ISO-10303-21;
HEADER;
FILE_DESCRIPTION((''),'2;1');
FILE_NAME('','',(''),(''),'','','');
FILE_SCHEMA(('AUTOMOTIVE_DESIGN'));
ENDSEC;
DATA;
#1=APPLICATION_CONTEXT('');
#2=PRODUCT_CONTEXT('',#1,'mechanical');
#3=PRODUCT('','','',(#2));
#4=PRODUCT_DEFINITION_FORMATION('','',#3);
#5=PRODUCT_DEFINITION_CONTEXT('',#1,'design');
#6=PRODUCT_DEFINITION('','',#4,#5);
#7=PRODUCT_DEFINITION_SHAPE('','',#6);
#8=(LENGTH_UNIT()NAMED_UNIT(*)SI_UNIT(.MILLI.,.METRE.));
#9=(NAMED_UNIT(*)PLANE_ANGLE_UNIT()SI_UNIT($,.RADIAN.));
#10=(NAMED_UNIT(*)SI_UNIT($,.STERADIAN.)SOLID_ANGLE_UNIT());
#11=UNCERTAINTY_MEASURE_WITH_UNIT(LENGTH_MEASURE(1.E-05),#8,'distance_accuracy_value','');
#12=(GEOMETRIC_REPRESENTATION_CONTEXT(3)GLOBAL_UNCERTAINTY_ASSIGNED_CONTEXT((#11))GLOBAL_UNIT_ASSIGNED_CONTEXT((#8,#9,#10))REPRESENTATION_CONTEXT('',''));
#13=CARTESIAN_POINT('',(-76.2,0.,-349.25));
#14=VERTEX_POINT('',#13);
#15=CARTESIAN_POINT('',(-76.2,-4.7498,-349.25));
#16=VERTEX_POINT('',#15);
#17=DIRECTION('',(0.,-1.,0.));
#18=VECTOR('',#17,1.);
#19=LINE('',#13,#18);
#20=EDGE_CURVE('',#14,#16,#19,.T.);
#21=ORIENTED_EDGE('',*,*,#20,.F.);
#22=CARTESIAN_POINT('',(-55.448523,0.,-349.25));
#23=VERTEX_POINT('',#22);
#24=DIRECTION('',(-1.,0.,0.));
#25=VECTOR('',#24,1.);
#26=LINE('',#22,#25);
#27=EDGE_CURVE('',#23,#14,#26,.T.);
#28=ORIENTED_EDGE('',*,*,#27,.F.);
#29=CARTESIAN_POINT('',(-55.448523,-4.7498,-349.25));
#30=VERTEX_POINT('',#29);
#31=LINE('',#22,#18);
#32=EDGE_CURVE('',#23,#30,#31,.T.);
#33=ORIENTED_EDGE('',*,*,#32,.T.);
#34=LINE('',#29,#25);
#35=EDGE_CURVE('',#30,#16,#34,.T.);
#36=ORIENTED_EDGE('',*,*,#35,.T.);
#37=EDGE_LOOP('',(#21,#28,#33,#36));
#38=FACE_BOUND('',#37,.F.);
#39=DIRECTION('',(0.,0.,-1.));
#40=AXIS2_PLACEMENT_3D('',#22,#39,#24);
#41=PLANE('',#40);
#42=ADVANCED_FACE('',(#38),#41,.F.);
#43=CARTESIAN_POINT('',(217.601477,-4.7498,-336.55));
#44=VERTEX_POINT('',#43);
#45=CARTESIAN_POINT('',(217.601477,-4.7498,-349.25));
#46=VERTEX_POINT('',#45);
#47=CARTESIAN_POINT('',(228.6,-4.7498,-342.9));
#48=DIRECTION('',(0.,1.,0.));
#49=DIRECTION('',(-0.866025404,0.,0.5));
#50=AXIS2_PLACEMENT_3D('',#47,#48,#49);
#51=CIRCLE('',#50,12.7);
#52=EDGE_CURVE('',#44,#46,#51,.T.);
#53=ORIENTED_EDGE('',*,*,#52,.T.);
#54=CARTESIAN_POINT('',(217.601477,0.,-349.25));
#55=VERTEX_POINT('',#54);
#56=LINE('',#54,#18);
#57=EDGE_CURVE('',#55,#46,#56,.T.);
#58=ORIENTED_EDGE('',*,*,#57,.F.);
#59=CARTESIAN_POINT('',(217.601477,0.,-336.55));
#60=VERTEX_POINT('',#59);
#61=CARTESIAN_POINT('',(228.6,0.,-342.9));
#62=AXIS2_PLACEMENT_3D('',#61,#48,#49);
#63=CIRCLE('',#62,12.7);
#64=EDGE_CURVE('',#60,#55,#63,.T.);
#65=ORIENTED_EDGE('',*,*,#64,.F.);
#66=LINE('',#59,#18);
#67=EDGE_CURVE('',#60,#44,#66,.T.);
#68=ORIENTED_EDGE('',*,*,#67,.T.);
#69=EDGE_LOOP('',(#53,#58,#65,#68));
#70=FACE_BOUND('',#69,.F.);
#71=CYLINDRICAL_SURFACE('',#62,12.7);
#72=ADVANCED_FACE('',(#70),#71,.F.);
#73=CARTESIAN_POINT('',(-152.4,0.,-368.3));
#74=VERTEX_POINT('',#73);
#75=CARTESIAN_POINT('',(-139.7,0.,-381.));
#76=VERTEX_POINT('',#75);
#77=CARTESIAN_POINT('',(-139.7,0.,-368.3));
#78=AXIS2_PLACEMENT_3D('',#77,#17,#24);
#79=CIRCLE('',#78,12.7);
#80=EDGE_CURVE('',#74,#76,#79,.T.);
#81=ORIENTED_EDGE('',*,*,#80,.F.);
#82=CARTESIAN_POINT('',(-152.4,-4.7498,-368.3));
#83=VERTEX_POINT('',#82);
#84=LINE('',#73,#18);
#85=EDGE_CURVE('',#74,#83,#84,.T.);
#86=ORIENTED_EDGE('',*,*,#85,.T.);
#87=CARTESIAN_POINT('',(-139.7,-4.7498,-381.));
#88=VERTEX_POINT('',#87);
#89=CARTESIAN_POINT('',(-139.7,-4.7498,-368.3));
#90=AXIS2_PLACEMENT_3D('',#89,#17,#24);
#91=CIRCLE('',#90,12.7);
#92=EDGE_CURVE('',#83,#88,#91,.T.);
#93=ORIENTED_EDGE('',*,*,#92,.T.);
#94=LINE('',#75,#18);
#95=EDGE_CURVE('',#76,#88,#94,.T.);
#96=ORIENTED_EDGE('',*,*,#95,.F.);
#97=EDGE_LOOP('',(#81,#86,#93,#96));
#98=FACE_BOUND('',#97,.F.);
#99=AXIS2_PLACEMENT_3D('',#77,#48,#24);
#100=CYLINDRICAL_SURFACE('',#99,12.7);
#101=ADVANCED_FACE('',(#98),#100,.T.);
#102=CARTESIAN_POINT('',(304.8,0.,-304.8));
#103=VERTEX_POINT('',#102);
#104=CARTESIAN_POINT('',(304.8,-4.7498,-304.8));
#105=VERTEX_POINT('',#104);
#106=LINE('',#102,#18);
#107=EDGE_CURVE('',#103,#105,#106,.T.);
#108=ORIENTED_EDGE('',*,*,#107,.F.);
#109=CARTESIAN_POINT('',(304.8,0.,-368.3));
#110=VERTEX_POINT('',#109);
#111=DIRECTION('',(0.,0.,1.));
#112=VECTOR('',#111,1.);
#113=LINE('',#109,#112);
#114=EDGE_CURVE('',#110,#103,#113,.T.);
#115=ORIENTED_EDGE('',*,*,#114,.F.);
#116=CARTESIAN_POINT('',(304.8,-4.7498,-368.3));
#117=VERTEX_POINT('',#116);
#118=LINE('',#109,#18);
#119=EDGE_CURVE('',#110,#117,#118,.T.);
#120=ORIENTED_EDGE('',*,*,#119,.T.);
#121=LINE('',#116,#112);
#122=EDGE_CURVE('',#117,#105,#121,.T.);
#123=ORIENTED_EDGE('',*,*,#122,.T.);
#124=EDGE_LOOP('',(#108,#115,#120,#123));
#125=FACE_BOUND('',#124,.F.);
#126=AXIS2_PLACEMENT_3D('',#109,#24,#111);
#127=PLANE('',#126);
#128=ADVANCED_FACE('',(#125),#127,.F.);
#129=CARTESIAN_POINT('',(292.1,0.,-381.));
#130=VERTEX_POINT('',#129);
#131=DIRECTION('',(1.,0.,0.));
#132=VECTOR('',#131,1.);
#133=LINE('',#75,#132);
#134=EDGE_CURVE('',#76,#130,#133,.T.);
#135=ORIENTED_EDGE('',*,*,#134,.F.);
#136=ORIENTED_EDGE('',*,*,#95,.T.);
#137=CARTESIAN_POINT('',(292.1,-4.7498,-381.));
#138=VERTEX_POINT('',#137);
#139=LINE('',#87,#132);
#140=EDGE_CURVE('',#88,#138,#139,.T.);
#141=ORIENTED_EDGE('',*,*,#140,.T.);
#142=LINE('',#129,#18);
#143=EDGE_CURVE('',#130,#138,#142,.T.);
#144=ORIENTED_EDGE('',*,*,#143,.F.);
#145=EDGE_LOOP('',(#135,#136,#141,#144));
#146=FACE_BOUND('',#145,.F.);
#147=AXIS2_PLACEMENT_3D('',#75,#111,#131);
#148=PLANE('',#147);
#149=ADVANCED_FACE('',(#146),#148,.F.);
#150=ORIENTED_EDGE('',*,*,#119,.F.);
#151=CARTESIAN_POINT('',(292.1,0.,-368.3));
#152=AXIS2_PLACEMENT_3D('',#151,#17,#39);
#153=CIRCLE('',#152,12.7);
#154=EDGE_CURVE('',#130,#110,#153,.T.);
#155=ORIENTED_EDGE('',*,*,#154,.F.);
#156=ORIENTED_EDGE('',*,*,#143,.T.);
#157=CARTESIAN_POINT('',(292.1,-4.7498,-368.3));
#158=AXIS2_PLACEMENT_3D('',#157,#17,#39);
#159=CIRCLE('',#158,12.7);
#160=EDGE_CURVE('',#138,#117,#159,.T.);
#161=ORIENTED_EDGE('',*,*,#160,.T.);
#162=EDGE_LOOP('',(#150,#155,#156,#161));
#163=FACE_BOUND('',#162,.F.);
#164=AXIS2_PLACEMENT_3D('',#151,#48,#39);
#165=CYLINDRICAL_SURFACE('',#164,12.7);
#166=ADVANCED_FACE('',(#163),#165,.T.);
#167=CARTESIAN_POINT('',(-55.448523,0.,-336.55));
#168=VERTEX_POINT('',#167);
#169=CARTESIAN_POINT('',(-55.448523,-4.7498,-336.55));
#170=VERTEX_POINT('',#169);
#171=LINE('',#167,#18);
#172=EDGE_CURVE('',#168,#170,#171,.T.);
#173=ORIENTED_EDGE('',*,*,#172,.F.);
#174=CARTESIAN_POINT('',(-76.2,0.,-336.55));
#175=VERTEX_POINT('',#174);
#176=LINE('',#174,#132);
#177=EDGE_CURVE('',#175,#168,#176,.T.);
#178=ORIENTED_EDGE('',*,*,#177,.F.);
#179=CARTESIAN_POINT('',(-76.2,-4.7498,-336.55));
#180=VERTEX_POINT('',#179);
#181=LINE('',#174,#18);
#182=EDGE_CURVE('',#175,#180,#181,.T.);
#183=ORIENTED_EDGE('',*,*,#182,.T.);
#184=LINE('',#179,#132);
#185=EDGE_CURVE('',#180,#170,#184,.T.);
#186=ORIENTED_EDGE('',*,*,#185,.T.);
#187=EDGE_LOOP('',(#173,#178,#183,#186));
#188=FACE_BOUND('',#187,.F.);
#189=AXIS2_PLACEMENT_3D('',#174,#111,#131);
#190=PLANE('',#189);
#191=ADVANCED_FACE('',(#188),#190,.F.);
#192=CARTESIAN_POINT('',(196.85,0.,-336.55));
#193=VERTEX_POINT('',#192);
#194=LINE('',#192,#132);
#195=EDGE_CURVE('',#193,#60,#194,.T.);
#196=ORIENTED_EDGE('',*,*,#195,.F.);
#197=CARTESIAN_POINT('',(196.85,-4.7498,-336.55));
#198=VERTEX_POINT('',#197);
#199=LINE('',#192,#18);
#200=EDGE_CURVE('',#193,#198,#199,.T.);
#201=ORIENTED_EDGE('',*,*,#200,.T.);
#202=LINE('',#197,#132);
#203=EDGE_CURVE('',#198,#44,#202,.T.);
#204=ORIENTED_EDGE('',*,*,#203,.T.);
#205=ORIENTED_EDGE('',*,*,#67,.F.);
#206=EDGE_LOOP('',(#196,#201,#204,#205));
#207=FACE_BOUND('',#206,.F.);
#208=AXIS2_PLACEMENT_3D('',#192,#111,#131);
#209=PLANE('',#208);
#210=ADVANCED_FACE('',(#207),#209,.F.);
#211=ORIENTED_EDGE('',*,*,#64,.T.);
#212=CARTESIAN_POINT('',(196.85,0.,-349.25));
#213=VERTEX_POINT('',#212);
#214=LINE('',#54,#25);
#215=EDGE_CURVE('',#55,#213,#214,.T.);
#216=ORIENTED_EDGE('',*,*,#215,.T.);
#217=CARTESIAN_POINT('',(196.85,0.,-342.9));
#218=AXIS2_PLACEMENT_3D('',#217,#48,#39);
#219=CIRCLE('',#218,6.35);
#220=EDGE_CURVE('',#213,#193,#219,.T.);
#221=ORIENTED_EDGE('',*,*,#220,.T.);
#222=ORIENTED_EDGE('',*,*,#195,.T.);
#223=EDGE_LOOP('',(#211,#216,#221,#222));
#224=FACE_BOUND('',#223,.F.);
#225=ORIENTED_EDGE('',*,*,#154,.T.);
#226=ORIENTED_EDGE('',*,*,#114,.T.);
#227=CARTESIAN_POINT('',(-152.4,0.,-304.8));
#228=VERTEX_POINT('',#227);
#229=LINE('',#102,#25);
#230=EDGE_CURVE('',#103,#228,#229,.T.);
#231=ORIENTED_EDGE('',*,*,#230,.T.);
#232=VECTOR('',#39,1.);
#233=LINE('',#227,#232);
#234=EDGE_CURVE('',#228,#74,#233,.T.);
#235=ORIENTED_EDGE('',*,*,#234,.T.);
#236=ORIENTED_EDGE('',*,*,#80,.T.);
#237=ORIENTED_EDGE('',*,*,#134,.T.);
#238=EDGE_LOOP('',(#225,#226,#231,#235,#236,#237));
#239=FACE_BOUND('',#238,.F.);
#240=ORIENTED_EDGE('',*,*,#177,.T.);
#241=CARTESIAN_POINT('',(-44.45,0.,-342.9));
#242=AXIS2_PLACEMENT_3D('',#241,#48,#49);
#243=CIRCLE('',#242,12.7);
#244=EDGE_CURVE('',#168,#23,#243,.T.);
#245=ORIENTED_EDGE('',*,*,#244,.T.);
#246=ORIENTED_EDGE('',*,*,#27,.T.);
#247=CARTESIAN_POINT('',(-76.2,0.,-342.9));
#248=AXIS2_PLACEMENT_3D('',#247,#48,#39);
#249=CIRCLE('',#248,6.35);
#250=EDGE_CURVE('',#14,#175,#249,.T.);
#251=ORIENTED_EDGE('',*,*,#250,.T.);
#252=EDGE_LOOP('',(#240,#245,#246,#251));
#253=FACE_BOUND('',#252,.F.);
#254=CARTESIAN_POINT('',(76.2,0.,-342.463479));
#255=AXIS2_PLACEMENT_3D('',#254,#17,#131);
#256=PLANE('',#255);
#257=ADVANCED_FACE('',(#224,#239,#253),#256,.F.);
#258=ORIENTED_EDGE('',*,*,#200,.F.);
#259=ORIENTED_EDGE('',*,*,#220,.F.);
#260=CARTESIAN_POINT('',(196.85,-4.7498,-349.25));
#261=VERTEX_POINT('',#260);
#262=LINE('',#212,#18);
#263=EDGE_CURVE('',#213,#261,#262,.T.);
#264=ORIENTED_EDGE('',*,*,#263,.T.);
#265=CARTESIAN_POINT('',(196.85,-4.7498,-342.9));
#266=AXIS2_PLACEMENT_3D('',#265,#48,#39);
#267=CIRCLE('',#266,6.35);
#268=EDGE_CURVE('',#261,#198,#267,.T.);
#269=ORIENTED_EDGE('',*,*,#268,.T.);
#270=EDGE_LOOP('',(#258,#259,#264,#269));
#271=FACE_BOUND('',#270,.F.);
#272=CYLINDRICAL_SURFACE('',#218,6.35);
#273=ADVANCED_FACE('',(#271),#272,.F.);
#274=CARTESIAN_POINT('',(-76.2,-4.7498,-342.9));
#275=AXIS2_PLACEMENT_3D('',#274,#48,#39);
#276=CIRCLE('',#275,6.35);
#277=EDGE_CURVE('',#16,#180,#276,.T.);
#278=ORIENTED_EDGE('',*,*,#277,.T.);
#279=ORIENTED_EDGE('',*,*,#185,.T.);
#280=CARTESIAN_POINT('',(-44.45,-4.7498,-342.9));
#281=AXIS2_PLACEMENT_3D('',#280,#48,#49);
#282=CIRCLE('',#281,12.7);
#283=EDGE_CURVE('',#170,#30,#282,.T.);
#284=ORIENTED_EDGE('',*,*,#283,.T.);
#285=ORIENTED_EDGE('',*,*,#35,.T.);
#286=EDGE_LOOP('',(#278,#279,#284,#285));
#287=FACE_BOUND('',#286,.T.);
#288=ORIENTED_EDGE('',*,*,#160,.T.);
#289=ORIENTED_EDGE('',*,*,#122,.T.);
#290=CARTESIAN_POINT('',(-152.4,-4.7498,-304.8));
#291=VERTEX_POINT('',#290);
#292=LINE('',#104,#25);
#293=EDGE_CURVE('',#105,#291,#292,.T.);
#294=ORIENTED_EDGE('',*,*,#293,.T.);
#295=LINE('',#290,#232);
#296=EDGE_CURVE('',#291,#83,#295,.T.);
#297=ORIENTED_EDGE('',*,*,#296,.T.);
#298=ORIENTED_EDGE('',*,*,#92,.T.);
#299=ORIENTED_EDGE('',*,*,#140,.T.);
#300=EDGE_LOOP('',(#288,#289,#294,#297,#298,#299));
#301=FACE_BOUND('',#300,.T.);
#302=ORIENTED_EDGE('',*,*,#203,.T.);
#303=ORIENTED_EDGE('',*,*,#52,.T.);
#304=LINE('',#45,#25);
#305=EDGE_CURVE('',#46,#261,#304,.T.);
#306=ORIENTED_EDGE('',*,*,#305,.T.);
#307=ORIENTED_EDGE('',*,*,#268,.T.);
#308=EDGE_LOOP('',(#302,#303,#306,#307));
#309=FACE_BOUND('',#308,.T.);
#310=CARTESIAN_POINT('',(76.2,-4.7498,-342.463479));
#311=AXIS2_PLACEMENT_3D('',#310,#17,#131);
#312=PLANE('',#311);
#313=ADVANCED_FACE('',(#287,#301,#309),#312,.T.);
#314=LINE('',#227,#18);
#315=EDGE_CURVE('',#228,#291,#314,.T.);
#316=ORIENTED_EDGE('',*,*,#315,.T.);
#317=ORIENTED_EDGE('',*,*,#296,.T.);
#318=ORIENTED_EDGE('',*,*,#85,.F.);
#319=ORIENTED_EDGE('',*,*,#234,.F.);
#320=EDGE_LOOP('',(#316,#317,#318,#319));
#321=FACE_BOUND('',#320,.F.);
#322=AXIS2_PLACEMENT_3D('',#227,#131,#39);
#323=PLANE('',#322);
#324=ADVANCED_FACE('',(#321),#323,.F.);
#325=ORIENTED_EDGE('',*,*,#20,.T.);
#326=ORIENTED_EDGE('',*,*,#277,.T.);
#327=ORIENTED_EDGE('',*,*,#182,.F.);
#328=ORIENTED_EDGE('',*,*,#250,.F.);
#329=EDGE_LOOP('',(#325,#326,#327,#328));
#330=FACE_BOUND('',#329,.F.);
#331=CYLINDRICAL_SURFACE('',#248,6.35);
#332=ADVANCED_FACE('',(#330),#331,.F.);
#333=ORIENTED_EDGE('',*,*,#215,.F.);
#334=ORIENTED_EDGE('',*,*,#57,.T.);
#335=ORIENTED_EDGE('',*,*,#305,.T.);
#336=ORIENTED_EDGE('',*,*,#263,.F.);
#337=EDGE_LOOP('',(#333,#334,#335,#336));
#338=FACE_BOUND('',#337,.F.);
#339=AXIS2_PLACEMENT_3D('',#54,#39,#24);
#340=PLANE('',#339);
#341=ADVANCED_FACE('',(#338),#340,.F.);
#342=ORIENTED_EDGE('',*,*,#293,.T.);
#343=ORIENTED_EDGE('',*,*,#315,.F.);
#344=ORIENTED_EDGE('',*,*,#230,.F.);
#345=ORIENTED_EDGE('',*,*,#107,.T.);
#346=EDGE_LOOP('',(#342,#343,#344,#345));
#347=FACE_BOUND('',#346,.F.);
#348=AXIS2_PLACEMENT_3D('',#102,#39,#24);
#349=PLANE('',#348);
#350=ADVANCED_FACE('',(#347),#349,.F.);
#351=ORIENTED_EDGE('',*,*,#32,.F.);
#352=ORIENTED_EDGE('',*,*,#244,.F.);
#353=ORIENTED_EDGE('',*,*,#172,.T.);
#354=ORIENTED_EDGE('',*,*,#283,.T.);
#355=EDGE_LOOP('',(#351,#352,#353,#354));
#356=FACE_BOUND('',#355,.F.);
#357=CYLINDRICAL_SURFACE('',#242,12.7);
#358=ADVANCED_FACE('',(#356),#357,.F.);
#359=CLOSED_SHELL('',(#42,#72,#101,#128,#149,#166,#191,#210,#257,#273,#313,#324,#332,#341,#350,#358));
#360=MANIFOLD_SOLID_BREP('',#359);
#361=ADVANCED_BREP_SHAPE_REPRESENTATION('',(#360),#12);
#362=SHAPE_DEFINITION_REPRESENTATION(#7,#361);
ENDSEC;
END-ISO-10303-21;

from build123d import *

# Parameters (mm, degrees)
F1_DEPTH = 4.7498


# Not quite as in the source:
# - a feature names something its author has since deleted; it is built from what else it names


with BuildPart() as f1:
    # F0 (on Front) → F1 (new body)
    with BuildSketch(Plane.XZ):
        with BuildLine():
            Line((304.8, -368.3), (304.8, -304.8))
            Line((304.8, -304.8), (0, -304.8))
            Line((0, -304.8), (-152.4, -304.8))
            Line((-152.4, -304.8), (-152.4, -368.3))
            ThreePointArc((-152.4, -368.3), (-148.6802561211, -377.2802561211), (-139.7, -381))
            Line((-139.7, -381), (292.1, -381))
            ThreePointArc((292.1, -381), (301.0802561211, -377.2802561211), (304.8, -368.3))
        make_face()
        with BuildLine():
            ThreePointArc((-55.4485226281, -336.55), (-31.75, -342.9), (-55.4485226281, -349.25))
            Line((-55.4485226281, -349.25), (-76.2, -349.25))
            ThreePointArc((-76.2, -349.25), (-82.55, -342.9), (-76.2, -336.55))
            Line((-76.2, -336.55), (-55.4485226281, -336.55))
        make_face(mode=Mode.SUBTRACT)
        with BuildLine():
            ThreePointArc((217.6014773719, -336.55), (241.3, -342.9), (217.6014773719, -349.25))
            Line((217.6014773719, -349.25), (196.85, -349.25))
            ThreePointArc((196.85, -349.25), (190.5, -342.9), (196.85, -336.55))
            Line((196.85, -336.55), (217.6014773719, -336.55))
        make_face(mode=Mode.SUBTRACT)
    extrude(amount=F1_DEPTH)


solid = f1.part
